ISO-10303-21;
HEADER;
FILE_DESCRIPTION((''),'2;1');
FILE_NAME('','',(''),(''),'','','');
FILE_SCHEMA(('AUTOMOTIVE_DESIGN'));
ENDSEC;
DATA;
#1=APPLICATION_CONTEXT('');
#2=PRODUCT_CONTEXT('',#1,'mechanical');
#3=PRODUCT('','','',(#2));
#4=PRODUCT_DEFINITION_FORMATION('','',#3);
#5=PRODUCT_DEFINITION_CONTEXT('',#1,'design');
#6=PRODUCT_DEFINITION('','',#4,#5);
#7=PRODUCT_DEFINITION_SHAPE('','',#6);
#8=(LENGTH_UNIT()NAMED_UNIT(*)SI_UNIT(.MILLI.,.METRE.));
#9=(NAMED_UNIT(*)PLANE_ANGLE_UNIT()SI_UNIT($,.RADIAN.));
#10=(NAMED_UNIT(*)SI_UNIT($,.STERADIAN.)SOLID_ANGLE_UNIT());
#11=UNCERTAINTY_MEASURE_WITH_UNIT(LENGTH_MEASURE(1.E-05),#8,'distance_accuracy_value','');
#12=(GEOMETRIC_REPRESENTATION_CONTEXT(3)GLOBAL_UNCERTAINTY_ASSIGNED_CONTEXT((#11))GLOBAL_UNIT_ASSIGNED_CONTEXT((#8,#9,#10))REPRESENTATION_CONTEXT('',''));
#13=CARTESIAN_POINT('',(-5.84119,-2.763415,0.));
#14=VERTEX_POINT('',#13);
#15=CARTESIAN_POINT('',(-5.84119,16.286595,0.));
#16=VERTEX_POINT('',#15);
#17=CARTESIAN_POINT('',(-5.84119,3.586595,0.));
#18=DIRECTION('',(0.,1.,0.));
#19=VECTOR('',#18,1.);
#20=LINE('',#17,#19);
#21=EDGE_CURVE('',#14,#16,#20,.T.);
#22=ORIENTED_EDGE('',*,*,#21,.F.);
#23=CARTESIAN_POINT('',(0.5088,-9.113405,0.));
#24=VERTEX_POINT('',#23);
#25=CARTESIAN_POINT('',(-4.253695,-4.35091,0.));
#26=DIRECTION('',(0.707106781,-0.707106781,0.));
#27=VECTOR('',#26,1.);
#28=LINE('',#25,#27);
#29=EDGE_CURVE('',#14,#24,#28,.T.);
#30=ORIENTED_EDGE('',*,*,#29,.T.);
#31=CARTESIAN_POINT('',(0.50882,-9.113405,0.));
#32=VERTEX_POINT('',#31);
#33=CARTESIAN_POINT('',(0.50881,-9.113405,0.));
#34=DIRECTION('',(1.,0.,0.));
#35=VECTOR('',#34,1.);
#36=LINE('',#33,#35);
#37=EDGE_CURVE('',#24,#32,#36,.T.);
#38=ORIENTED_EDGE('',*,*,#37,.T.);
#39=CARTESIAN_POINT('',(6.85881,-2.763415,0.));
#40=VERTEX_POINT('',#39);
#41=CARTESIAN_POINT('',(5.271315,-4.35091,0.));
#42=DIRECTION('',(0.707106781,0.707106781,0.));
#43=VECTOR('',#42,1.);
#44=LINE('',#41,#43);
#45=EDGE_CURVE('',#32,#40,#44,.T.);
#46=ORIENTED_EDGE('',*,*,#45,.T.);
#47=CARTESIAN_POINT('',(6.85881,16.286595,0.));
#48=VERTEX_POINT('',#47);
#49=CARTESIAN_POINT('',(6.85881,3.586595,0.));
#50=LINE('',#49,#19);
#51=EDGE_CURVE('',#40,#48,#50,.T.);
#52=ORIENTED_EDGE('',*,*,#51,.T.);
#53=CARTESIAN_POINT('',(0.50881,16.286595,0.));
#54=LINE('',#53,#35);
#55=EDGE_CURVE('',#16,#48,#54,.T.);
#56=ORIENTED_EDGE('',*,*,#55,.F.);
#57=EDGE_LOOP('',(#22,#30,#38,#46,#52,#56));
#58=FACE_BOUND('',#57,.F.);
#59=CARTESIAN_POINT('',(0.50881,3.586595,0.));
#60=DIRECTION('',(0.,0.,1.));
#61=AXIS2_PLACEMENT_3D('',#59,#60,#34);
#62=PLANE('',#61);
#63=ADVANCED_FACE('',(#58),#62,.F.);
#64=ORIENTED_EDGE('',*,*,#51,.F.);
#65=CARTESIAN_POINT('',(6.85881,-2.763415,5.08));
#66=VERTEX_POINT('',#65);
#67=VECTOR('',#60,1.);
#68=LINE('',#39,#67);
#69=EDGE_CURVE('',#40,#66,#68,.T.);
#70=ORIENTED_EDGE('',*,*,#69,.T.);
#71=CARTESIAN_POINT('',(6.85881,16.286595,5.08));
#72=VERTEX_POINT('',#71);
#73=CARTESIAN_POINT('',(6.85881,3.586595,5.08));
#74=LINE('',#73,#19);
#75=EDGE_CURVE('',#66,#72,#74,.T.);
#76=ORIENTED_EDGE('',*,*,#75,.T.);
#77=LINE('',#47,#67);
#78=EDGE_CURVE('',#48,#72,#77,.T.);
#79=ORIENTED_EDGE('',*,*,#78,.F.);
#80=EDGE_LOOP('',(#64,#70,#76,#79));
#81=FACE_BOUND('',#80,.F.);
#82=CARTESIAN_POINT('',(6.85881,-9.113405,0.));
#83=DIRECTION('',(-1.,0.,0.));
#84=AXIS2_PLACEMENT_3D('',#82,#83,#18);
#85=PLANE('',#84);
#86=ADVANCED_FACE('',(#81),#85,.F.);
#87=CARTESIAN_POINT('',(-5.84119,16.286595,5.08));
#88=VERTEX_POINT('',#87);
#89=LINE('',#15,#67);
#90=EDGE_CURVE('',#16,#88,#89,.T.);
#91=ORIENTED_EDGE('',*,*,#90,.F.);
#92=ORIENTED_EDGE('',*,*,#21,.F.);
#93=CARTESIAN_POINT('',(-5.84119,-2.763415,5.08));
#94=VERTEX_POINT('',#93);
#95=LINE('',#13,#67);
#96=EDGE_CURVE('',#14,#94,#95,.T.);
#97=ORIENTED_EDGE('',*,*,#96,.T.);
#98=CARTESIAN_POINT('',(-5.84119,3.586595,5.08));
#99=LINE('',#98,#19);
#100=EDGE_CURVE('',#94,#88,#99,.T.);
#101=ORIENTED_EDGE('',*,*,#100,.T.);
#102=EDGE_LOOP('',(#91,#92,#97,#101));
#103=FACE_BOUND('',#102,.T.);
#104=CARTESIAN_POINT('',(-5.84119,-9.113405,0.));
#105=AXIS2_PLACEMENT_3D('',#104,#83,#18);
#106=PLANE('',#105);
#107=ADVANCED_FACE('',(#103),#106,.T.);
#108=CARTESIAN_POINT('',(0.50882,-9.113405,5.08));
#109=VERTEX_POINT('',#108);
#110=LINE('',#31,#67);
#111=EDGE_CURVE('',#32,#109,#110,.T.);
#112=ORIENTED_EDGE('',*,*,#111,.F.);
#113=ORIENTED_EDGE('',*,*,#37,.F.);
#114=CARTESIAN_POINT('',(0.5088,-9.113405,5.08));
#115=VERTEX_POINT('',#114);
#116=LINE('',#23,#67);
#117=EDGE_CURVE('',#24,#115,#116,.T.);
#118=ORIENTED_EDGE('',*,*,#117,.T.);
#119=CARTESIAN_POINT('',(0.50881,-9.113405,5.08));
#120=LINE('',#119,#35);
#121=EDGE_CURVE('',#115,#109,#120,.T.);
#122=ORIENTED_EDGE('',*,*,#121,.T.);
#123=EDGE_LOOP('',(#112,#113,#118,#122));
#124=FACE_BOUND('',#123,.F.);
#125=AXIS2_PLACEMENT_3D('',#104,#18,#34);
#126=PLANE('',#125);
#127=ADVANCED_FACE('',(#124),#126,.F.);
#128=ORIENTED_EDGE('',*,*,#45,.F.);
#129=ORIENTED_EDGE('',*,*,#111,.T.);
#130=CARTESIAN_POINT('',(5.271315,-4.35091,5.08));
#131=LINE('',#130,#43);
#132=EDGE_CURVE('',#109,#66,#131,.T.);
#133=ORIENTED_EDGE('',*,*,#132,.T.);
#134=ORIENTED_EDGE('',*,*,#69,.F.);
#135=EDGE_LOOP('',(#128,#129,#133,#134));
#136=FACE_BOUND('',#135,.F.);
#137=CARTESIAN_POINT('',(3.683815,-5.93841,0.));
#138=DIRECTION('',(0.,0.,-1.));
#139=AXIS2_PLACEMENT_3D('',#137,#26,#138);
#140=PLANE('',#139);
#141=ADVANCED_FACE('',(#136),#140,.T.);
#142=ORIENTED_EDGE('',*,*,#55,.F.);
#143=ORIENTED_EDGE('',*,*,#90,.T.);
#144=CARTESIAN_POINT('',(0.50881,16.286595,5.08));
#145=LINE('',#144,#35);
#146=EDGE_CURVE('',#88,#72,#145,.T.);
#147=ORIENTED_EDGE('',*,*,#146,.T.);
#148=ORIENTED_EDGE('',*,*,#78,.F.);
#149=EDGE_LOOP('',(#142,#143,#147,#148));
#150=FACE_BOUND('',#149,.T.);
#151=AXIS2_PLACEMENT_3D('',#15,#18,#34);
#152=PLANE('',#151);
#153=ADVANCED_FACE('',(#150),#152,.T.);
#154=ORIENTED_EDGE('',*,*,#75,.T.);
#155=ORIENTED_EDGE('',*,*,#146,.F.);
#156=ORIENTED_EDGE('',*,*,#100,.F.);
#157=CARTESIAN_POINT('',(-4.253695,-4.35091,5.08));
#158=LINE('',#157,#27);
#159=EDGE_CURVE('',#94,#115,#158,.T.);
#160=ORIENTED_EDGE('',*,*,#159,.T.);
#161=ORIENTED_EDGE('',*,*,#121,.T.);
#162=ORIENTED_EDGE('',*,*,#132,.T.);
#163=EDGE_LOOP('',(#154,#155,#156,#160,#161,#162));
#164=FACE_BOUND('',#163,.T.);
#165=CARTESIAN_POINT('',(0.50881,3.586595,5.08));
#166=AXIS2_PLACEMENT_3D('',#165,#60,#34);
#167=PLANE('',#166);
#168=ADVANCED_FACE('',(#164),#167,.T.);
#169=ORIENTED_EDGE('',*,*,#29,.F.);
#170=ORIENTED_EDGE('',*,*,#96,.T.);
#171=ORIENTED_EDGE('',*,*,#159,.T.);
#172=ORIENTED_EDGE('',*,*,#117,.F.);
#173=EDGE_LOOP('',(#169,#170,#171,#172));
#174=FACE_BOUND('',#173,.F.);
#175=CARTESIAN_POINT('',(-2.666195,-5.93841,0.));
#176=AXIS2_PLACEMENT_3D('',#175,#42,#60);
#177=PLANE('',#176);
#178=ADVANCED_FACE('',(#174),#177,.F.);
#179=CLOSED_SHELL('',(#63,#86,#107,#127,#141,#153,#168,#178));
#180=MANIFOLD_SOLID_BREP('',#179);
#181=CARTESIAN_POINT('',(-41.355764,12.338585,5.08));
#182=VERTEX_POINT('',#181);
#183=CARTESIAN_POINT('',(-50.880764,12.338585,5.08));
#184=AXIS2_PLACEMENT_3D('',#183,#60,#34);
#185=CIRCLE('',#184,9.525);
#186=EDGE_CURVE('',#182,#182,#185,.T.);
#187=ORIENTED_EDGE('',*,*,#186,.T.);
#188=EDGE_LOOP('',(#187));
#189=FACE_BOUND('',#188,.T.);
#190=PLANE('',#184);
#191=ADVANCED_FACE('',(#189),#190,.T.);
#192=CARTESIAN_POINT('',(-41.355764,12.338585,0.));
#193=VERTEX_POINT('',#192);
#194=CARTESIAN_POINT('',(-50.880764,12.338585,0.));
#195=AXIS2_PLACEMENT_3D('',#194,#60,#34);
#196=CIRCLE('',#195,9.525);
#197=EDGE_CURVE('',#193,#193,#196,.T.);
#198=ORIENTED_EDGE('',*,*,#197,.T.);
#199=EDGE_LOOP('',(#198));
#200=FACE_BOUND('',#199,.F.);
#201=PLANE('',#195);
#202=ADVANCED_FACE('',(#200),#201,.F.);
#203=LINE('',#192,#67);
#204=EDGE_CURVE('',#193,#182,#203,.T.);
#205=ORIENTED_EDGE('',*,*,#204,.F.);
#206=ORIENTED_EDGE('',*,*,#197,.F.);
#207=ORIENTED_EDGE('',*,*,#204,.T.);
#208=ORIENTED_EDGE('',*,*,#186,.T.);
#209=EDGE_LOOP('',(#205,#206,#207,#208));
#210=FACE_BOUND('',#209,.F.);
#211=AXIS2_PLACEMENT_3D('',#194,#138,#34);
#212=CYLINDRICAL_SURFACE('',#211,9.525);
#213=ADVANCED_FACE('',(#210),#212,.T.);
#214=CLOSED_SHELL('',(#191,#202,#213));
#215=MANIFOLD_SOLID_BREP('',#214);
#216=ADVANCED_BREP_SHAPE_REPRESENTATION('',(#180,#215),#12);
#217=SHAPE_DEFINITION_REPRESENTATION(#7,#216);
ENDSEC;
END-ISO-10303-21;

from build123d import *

# Parameters (mm, degrees)
F0_W     = 12.7
F0_H     = 25.4
F1_DEPTH = 5.08
F2_SIZE  = 6.34999
F3_R     = 9.525
F4_DEPTH = 5.08


# Not quite as in the source:
# - a fillet or chamfer is up to 0.001 mm smaller than in the source, because OpenCascade refuses the exact size


with BuildPart() as f1:
    # F0 (on Top) → F1 (new body)
    with BuildSketch(Plane.XY):
        with Locations((0.5088095786, 3.5865946344)):
            Rectangle(F0_W, F0_H)
    extrude(amount=F1_DEPTH)

    # F2 (size 6.35 in the source; OpenCascade refuses exactly that, so slightly less here)
    f2_edges = [f1.edges().sort_by_distance(p)[0] for p in [
        (6.85881, -9.113405, 2.54),
        (-5.84119, -9.113405, 2.54),
    ]]
    chamfer(f2_edges, length=F2_SIZE)


with BuildPart() as f4:
    # F3 (on Top) → F4 (new body)
    with BuildSketch(Plane.XY):
        with Locations((-50.8807636797, 12.3385852203)):
            Circle(F3_R)
    extrude(amount=F4_DEPTH)


solid = Compound([f1.part, f4.part])
